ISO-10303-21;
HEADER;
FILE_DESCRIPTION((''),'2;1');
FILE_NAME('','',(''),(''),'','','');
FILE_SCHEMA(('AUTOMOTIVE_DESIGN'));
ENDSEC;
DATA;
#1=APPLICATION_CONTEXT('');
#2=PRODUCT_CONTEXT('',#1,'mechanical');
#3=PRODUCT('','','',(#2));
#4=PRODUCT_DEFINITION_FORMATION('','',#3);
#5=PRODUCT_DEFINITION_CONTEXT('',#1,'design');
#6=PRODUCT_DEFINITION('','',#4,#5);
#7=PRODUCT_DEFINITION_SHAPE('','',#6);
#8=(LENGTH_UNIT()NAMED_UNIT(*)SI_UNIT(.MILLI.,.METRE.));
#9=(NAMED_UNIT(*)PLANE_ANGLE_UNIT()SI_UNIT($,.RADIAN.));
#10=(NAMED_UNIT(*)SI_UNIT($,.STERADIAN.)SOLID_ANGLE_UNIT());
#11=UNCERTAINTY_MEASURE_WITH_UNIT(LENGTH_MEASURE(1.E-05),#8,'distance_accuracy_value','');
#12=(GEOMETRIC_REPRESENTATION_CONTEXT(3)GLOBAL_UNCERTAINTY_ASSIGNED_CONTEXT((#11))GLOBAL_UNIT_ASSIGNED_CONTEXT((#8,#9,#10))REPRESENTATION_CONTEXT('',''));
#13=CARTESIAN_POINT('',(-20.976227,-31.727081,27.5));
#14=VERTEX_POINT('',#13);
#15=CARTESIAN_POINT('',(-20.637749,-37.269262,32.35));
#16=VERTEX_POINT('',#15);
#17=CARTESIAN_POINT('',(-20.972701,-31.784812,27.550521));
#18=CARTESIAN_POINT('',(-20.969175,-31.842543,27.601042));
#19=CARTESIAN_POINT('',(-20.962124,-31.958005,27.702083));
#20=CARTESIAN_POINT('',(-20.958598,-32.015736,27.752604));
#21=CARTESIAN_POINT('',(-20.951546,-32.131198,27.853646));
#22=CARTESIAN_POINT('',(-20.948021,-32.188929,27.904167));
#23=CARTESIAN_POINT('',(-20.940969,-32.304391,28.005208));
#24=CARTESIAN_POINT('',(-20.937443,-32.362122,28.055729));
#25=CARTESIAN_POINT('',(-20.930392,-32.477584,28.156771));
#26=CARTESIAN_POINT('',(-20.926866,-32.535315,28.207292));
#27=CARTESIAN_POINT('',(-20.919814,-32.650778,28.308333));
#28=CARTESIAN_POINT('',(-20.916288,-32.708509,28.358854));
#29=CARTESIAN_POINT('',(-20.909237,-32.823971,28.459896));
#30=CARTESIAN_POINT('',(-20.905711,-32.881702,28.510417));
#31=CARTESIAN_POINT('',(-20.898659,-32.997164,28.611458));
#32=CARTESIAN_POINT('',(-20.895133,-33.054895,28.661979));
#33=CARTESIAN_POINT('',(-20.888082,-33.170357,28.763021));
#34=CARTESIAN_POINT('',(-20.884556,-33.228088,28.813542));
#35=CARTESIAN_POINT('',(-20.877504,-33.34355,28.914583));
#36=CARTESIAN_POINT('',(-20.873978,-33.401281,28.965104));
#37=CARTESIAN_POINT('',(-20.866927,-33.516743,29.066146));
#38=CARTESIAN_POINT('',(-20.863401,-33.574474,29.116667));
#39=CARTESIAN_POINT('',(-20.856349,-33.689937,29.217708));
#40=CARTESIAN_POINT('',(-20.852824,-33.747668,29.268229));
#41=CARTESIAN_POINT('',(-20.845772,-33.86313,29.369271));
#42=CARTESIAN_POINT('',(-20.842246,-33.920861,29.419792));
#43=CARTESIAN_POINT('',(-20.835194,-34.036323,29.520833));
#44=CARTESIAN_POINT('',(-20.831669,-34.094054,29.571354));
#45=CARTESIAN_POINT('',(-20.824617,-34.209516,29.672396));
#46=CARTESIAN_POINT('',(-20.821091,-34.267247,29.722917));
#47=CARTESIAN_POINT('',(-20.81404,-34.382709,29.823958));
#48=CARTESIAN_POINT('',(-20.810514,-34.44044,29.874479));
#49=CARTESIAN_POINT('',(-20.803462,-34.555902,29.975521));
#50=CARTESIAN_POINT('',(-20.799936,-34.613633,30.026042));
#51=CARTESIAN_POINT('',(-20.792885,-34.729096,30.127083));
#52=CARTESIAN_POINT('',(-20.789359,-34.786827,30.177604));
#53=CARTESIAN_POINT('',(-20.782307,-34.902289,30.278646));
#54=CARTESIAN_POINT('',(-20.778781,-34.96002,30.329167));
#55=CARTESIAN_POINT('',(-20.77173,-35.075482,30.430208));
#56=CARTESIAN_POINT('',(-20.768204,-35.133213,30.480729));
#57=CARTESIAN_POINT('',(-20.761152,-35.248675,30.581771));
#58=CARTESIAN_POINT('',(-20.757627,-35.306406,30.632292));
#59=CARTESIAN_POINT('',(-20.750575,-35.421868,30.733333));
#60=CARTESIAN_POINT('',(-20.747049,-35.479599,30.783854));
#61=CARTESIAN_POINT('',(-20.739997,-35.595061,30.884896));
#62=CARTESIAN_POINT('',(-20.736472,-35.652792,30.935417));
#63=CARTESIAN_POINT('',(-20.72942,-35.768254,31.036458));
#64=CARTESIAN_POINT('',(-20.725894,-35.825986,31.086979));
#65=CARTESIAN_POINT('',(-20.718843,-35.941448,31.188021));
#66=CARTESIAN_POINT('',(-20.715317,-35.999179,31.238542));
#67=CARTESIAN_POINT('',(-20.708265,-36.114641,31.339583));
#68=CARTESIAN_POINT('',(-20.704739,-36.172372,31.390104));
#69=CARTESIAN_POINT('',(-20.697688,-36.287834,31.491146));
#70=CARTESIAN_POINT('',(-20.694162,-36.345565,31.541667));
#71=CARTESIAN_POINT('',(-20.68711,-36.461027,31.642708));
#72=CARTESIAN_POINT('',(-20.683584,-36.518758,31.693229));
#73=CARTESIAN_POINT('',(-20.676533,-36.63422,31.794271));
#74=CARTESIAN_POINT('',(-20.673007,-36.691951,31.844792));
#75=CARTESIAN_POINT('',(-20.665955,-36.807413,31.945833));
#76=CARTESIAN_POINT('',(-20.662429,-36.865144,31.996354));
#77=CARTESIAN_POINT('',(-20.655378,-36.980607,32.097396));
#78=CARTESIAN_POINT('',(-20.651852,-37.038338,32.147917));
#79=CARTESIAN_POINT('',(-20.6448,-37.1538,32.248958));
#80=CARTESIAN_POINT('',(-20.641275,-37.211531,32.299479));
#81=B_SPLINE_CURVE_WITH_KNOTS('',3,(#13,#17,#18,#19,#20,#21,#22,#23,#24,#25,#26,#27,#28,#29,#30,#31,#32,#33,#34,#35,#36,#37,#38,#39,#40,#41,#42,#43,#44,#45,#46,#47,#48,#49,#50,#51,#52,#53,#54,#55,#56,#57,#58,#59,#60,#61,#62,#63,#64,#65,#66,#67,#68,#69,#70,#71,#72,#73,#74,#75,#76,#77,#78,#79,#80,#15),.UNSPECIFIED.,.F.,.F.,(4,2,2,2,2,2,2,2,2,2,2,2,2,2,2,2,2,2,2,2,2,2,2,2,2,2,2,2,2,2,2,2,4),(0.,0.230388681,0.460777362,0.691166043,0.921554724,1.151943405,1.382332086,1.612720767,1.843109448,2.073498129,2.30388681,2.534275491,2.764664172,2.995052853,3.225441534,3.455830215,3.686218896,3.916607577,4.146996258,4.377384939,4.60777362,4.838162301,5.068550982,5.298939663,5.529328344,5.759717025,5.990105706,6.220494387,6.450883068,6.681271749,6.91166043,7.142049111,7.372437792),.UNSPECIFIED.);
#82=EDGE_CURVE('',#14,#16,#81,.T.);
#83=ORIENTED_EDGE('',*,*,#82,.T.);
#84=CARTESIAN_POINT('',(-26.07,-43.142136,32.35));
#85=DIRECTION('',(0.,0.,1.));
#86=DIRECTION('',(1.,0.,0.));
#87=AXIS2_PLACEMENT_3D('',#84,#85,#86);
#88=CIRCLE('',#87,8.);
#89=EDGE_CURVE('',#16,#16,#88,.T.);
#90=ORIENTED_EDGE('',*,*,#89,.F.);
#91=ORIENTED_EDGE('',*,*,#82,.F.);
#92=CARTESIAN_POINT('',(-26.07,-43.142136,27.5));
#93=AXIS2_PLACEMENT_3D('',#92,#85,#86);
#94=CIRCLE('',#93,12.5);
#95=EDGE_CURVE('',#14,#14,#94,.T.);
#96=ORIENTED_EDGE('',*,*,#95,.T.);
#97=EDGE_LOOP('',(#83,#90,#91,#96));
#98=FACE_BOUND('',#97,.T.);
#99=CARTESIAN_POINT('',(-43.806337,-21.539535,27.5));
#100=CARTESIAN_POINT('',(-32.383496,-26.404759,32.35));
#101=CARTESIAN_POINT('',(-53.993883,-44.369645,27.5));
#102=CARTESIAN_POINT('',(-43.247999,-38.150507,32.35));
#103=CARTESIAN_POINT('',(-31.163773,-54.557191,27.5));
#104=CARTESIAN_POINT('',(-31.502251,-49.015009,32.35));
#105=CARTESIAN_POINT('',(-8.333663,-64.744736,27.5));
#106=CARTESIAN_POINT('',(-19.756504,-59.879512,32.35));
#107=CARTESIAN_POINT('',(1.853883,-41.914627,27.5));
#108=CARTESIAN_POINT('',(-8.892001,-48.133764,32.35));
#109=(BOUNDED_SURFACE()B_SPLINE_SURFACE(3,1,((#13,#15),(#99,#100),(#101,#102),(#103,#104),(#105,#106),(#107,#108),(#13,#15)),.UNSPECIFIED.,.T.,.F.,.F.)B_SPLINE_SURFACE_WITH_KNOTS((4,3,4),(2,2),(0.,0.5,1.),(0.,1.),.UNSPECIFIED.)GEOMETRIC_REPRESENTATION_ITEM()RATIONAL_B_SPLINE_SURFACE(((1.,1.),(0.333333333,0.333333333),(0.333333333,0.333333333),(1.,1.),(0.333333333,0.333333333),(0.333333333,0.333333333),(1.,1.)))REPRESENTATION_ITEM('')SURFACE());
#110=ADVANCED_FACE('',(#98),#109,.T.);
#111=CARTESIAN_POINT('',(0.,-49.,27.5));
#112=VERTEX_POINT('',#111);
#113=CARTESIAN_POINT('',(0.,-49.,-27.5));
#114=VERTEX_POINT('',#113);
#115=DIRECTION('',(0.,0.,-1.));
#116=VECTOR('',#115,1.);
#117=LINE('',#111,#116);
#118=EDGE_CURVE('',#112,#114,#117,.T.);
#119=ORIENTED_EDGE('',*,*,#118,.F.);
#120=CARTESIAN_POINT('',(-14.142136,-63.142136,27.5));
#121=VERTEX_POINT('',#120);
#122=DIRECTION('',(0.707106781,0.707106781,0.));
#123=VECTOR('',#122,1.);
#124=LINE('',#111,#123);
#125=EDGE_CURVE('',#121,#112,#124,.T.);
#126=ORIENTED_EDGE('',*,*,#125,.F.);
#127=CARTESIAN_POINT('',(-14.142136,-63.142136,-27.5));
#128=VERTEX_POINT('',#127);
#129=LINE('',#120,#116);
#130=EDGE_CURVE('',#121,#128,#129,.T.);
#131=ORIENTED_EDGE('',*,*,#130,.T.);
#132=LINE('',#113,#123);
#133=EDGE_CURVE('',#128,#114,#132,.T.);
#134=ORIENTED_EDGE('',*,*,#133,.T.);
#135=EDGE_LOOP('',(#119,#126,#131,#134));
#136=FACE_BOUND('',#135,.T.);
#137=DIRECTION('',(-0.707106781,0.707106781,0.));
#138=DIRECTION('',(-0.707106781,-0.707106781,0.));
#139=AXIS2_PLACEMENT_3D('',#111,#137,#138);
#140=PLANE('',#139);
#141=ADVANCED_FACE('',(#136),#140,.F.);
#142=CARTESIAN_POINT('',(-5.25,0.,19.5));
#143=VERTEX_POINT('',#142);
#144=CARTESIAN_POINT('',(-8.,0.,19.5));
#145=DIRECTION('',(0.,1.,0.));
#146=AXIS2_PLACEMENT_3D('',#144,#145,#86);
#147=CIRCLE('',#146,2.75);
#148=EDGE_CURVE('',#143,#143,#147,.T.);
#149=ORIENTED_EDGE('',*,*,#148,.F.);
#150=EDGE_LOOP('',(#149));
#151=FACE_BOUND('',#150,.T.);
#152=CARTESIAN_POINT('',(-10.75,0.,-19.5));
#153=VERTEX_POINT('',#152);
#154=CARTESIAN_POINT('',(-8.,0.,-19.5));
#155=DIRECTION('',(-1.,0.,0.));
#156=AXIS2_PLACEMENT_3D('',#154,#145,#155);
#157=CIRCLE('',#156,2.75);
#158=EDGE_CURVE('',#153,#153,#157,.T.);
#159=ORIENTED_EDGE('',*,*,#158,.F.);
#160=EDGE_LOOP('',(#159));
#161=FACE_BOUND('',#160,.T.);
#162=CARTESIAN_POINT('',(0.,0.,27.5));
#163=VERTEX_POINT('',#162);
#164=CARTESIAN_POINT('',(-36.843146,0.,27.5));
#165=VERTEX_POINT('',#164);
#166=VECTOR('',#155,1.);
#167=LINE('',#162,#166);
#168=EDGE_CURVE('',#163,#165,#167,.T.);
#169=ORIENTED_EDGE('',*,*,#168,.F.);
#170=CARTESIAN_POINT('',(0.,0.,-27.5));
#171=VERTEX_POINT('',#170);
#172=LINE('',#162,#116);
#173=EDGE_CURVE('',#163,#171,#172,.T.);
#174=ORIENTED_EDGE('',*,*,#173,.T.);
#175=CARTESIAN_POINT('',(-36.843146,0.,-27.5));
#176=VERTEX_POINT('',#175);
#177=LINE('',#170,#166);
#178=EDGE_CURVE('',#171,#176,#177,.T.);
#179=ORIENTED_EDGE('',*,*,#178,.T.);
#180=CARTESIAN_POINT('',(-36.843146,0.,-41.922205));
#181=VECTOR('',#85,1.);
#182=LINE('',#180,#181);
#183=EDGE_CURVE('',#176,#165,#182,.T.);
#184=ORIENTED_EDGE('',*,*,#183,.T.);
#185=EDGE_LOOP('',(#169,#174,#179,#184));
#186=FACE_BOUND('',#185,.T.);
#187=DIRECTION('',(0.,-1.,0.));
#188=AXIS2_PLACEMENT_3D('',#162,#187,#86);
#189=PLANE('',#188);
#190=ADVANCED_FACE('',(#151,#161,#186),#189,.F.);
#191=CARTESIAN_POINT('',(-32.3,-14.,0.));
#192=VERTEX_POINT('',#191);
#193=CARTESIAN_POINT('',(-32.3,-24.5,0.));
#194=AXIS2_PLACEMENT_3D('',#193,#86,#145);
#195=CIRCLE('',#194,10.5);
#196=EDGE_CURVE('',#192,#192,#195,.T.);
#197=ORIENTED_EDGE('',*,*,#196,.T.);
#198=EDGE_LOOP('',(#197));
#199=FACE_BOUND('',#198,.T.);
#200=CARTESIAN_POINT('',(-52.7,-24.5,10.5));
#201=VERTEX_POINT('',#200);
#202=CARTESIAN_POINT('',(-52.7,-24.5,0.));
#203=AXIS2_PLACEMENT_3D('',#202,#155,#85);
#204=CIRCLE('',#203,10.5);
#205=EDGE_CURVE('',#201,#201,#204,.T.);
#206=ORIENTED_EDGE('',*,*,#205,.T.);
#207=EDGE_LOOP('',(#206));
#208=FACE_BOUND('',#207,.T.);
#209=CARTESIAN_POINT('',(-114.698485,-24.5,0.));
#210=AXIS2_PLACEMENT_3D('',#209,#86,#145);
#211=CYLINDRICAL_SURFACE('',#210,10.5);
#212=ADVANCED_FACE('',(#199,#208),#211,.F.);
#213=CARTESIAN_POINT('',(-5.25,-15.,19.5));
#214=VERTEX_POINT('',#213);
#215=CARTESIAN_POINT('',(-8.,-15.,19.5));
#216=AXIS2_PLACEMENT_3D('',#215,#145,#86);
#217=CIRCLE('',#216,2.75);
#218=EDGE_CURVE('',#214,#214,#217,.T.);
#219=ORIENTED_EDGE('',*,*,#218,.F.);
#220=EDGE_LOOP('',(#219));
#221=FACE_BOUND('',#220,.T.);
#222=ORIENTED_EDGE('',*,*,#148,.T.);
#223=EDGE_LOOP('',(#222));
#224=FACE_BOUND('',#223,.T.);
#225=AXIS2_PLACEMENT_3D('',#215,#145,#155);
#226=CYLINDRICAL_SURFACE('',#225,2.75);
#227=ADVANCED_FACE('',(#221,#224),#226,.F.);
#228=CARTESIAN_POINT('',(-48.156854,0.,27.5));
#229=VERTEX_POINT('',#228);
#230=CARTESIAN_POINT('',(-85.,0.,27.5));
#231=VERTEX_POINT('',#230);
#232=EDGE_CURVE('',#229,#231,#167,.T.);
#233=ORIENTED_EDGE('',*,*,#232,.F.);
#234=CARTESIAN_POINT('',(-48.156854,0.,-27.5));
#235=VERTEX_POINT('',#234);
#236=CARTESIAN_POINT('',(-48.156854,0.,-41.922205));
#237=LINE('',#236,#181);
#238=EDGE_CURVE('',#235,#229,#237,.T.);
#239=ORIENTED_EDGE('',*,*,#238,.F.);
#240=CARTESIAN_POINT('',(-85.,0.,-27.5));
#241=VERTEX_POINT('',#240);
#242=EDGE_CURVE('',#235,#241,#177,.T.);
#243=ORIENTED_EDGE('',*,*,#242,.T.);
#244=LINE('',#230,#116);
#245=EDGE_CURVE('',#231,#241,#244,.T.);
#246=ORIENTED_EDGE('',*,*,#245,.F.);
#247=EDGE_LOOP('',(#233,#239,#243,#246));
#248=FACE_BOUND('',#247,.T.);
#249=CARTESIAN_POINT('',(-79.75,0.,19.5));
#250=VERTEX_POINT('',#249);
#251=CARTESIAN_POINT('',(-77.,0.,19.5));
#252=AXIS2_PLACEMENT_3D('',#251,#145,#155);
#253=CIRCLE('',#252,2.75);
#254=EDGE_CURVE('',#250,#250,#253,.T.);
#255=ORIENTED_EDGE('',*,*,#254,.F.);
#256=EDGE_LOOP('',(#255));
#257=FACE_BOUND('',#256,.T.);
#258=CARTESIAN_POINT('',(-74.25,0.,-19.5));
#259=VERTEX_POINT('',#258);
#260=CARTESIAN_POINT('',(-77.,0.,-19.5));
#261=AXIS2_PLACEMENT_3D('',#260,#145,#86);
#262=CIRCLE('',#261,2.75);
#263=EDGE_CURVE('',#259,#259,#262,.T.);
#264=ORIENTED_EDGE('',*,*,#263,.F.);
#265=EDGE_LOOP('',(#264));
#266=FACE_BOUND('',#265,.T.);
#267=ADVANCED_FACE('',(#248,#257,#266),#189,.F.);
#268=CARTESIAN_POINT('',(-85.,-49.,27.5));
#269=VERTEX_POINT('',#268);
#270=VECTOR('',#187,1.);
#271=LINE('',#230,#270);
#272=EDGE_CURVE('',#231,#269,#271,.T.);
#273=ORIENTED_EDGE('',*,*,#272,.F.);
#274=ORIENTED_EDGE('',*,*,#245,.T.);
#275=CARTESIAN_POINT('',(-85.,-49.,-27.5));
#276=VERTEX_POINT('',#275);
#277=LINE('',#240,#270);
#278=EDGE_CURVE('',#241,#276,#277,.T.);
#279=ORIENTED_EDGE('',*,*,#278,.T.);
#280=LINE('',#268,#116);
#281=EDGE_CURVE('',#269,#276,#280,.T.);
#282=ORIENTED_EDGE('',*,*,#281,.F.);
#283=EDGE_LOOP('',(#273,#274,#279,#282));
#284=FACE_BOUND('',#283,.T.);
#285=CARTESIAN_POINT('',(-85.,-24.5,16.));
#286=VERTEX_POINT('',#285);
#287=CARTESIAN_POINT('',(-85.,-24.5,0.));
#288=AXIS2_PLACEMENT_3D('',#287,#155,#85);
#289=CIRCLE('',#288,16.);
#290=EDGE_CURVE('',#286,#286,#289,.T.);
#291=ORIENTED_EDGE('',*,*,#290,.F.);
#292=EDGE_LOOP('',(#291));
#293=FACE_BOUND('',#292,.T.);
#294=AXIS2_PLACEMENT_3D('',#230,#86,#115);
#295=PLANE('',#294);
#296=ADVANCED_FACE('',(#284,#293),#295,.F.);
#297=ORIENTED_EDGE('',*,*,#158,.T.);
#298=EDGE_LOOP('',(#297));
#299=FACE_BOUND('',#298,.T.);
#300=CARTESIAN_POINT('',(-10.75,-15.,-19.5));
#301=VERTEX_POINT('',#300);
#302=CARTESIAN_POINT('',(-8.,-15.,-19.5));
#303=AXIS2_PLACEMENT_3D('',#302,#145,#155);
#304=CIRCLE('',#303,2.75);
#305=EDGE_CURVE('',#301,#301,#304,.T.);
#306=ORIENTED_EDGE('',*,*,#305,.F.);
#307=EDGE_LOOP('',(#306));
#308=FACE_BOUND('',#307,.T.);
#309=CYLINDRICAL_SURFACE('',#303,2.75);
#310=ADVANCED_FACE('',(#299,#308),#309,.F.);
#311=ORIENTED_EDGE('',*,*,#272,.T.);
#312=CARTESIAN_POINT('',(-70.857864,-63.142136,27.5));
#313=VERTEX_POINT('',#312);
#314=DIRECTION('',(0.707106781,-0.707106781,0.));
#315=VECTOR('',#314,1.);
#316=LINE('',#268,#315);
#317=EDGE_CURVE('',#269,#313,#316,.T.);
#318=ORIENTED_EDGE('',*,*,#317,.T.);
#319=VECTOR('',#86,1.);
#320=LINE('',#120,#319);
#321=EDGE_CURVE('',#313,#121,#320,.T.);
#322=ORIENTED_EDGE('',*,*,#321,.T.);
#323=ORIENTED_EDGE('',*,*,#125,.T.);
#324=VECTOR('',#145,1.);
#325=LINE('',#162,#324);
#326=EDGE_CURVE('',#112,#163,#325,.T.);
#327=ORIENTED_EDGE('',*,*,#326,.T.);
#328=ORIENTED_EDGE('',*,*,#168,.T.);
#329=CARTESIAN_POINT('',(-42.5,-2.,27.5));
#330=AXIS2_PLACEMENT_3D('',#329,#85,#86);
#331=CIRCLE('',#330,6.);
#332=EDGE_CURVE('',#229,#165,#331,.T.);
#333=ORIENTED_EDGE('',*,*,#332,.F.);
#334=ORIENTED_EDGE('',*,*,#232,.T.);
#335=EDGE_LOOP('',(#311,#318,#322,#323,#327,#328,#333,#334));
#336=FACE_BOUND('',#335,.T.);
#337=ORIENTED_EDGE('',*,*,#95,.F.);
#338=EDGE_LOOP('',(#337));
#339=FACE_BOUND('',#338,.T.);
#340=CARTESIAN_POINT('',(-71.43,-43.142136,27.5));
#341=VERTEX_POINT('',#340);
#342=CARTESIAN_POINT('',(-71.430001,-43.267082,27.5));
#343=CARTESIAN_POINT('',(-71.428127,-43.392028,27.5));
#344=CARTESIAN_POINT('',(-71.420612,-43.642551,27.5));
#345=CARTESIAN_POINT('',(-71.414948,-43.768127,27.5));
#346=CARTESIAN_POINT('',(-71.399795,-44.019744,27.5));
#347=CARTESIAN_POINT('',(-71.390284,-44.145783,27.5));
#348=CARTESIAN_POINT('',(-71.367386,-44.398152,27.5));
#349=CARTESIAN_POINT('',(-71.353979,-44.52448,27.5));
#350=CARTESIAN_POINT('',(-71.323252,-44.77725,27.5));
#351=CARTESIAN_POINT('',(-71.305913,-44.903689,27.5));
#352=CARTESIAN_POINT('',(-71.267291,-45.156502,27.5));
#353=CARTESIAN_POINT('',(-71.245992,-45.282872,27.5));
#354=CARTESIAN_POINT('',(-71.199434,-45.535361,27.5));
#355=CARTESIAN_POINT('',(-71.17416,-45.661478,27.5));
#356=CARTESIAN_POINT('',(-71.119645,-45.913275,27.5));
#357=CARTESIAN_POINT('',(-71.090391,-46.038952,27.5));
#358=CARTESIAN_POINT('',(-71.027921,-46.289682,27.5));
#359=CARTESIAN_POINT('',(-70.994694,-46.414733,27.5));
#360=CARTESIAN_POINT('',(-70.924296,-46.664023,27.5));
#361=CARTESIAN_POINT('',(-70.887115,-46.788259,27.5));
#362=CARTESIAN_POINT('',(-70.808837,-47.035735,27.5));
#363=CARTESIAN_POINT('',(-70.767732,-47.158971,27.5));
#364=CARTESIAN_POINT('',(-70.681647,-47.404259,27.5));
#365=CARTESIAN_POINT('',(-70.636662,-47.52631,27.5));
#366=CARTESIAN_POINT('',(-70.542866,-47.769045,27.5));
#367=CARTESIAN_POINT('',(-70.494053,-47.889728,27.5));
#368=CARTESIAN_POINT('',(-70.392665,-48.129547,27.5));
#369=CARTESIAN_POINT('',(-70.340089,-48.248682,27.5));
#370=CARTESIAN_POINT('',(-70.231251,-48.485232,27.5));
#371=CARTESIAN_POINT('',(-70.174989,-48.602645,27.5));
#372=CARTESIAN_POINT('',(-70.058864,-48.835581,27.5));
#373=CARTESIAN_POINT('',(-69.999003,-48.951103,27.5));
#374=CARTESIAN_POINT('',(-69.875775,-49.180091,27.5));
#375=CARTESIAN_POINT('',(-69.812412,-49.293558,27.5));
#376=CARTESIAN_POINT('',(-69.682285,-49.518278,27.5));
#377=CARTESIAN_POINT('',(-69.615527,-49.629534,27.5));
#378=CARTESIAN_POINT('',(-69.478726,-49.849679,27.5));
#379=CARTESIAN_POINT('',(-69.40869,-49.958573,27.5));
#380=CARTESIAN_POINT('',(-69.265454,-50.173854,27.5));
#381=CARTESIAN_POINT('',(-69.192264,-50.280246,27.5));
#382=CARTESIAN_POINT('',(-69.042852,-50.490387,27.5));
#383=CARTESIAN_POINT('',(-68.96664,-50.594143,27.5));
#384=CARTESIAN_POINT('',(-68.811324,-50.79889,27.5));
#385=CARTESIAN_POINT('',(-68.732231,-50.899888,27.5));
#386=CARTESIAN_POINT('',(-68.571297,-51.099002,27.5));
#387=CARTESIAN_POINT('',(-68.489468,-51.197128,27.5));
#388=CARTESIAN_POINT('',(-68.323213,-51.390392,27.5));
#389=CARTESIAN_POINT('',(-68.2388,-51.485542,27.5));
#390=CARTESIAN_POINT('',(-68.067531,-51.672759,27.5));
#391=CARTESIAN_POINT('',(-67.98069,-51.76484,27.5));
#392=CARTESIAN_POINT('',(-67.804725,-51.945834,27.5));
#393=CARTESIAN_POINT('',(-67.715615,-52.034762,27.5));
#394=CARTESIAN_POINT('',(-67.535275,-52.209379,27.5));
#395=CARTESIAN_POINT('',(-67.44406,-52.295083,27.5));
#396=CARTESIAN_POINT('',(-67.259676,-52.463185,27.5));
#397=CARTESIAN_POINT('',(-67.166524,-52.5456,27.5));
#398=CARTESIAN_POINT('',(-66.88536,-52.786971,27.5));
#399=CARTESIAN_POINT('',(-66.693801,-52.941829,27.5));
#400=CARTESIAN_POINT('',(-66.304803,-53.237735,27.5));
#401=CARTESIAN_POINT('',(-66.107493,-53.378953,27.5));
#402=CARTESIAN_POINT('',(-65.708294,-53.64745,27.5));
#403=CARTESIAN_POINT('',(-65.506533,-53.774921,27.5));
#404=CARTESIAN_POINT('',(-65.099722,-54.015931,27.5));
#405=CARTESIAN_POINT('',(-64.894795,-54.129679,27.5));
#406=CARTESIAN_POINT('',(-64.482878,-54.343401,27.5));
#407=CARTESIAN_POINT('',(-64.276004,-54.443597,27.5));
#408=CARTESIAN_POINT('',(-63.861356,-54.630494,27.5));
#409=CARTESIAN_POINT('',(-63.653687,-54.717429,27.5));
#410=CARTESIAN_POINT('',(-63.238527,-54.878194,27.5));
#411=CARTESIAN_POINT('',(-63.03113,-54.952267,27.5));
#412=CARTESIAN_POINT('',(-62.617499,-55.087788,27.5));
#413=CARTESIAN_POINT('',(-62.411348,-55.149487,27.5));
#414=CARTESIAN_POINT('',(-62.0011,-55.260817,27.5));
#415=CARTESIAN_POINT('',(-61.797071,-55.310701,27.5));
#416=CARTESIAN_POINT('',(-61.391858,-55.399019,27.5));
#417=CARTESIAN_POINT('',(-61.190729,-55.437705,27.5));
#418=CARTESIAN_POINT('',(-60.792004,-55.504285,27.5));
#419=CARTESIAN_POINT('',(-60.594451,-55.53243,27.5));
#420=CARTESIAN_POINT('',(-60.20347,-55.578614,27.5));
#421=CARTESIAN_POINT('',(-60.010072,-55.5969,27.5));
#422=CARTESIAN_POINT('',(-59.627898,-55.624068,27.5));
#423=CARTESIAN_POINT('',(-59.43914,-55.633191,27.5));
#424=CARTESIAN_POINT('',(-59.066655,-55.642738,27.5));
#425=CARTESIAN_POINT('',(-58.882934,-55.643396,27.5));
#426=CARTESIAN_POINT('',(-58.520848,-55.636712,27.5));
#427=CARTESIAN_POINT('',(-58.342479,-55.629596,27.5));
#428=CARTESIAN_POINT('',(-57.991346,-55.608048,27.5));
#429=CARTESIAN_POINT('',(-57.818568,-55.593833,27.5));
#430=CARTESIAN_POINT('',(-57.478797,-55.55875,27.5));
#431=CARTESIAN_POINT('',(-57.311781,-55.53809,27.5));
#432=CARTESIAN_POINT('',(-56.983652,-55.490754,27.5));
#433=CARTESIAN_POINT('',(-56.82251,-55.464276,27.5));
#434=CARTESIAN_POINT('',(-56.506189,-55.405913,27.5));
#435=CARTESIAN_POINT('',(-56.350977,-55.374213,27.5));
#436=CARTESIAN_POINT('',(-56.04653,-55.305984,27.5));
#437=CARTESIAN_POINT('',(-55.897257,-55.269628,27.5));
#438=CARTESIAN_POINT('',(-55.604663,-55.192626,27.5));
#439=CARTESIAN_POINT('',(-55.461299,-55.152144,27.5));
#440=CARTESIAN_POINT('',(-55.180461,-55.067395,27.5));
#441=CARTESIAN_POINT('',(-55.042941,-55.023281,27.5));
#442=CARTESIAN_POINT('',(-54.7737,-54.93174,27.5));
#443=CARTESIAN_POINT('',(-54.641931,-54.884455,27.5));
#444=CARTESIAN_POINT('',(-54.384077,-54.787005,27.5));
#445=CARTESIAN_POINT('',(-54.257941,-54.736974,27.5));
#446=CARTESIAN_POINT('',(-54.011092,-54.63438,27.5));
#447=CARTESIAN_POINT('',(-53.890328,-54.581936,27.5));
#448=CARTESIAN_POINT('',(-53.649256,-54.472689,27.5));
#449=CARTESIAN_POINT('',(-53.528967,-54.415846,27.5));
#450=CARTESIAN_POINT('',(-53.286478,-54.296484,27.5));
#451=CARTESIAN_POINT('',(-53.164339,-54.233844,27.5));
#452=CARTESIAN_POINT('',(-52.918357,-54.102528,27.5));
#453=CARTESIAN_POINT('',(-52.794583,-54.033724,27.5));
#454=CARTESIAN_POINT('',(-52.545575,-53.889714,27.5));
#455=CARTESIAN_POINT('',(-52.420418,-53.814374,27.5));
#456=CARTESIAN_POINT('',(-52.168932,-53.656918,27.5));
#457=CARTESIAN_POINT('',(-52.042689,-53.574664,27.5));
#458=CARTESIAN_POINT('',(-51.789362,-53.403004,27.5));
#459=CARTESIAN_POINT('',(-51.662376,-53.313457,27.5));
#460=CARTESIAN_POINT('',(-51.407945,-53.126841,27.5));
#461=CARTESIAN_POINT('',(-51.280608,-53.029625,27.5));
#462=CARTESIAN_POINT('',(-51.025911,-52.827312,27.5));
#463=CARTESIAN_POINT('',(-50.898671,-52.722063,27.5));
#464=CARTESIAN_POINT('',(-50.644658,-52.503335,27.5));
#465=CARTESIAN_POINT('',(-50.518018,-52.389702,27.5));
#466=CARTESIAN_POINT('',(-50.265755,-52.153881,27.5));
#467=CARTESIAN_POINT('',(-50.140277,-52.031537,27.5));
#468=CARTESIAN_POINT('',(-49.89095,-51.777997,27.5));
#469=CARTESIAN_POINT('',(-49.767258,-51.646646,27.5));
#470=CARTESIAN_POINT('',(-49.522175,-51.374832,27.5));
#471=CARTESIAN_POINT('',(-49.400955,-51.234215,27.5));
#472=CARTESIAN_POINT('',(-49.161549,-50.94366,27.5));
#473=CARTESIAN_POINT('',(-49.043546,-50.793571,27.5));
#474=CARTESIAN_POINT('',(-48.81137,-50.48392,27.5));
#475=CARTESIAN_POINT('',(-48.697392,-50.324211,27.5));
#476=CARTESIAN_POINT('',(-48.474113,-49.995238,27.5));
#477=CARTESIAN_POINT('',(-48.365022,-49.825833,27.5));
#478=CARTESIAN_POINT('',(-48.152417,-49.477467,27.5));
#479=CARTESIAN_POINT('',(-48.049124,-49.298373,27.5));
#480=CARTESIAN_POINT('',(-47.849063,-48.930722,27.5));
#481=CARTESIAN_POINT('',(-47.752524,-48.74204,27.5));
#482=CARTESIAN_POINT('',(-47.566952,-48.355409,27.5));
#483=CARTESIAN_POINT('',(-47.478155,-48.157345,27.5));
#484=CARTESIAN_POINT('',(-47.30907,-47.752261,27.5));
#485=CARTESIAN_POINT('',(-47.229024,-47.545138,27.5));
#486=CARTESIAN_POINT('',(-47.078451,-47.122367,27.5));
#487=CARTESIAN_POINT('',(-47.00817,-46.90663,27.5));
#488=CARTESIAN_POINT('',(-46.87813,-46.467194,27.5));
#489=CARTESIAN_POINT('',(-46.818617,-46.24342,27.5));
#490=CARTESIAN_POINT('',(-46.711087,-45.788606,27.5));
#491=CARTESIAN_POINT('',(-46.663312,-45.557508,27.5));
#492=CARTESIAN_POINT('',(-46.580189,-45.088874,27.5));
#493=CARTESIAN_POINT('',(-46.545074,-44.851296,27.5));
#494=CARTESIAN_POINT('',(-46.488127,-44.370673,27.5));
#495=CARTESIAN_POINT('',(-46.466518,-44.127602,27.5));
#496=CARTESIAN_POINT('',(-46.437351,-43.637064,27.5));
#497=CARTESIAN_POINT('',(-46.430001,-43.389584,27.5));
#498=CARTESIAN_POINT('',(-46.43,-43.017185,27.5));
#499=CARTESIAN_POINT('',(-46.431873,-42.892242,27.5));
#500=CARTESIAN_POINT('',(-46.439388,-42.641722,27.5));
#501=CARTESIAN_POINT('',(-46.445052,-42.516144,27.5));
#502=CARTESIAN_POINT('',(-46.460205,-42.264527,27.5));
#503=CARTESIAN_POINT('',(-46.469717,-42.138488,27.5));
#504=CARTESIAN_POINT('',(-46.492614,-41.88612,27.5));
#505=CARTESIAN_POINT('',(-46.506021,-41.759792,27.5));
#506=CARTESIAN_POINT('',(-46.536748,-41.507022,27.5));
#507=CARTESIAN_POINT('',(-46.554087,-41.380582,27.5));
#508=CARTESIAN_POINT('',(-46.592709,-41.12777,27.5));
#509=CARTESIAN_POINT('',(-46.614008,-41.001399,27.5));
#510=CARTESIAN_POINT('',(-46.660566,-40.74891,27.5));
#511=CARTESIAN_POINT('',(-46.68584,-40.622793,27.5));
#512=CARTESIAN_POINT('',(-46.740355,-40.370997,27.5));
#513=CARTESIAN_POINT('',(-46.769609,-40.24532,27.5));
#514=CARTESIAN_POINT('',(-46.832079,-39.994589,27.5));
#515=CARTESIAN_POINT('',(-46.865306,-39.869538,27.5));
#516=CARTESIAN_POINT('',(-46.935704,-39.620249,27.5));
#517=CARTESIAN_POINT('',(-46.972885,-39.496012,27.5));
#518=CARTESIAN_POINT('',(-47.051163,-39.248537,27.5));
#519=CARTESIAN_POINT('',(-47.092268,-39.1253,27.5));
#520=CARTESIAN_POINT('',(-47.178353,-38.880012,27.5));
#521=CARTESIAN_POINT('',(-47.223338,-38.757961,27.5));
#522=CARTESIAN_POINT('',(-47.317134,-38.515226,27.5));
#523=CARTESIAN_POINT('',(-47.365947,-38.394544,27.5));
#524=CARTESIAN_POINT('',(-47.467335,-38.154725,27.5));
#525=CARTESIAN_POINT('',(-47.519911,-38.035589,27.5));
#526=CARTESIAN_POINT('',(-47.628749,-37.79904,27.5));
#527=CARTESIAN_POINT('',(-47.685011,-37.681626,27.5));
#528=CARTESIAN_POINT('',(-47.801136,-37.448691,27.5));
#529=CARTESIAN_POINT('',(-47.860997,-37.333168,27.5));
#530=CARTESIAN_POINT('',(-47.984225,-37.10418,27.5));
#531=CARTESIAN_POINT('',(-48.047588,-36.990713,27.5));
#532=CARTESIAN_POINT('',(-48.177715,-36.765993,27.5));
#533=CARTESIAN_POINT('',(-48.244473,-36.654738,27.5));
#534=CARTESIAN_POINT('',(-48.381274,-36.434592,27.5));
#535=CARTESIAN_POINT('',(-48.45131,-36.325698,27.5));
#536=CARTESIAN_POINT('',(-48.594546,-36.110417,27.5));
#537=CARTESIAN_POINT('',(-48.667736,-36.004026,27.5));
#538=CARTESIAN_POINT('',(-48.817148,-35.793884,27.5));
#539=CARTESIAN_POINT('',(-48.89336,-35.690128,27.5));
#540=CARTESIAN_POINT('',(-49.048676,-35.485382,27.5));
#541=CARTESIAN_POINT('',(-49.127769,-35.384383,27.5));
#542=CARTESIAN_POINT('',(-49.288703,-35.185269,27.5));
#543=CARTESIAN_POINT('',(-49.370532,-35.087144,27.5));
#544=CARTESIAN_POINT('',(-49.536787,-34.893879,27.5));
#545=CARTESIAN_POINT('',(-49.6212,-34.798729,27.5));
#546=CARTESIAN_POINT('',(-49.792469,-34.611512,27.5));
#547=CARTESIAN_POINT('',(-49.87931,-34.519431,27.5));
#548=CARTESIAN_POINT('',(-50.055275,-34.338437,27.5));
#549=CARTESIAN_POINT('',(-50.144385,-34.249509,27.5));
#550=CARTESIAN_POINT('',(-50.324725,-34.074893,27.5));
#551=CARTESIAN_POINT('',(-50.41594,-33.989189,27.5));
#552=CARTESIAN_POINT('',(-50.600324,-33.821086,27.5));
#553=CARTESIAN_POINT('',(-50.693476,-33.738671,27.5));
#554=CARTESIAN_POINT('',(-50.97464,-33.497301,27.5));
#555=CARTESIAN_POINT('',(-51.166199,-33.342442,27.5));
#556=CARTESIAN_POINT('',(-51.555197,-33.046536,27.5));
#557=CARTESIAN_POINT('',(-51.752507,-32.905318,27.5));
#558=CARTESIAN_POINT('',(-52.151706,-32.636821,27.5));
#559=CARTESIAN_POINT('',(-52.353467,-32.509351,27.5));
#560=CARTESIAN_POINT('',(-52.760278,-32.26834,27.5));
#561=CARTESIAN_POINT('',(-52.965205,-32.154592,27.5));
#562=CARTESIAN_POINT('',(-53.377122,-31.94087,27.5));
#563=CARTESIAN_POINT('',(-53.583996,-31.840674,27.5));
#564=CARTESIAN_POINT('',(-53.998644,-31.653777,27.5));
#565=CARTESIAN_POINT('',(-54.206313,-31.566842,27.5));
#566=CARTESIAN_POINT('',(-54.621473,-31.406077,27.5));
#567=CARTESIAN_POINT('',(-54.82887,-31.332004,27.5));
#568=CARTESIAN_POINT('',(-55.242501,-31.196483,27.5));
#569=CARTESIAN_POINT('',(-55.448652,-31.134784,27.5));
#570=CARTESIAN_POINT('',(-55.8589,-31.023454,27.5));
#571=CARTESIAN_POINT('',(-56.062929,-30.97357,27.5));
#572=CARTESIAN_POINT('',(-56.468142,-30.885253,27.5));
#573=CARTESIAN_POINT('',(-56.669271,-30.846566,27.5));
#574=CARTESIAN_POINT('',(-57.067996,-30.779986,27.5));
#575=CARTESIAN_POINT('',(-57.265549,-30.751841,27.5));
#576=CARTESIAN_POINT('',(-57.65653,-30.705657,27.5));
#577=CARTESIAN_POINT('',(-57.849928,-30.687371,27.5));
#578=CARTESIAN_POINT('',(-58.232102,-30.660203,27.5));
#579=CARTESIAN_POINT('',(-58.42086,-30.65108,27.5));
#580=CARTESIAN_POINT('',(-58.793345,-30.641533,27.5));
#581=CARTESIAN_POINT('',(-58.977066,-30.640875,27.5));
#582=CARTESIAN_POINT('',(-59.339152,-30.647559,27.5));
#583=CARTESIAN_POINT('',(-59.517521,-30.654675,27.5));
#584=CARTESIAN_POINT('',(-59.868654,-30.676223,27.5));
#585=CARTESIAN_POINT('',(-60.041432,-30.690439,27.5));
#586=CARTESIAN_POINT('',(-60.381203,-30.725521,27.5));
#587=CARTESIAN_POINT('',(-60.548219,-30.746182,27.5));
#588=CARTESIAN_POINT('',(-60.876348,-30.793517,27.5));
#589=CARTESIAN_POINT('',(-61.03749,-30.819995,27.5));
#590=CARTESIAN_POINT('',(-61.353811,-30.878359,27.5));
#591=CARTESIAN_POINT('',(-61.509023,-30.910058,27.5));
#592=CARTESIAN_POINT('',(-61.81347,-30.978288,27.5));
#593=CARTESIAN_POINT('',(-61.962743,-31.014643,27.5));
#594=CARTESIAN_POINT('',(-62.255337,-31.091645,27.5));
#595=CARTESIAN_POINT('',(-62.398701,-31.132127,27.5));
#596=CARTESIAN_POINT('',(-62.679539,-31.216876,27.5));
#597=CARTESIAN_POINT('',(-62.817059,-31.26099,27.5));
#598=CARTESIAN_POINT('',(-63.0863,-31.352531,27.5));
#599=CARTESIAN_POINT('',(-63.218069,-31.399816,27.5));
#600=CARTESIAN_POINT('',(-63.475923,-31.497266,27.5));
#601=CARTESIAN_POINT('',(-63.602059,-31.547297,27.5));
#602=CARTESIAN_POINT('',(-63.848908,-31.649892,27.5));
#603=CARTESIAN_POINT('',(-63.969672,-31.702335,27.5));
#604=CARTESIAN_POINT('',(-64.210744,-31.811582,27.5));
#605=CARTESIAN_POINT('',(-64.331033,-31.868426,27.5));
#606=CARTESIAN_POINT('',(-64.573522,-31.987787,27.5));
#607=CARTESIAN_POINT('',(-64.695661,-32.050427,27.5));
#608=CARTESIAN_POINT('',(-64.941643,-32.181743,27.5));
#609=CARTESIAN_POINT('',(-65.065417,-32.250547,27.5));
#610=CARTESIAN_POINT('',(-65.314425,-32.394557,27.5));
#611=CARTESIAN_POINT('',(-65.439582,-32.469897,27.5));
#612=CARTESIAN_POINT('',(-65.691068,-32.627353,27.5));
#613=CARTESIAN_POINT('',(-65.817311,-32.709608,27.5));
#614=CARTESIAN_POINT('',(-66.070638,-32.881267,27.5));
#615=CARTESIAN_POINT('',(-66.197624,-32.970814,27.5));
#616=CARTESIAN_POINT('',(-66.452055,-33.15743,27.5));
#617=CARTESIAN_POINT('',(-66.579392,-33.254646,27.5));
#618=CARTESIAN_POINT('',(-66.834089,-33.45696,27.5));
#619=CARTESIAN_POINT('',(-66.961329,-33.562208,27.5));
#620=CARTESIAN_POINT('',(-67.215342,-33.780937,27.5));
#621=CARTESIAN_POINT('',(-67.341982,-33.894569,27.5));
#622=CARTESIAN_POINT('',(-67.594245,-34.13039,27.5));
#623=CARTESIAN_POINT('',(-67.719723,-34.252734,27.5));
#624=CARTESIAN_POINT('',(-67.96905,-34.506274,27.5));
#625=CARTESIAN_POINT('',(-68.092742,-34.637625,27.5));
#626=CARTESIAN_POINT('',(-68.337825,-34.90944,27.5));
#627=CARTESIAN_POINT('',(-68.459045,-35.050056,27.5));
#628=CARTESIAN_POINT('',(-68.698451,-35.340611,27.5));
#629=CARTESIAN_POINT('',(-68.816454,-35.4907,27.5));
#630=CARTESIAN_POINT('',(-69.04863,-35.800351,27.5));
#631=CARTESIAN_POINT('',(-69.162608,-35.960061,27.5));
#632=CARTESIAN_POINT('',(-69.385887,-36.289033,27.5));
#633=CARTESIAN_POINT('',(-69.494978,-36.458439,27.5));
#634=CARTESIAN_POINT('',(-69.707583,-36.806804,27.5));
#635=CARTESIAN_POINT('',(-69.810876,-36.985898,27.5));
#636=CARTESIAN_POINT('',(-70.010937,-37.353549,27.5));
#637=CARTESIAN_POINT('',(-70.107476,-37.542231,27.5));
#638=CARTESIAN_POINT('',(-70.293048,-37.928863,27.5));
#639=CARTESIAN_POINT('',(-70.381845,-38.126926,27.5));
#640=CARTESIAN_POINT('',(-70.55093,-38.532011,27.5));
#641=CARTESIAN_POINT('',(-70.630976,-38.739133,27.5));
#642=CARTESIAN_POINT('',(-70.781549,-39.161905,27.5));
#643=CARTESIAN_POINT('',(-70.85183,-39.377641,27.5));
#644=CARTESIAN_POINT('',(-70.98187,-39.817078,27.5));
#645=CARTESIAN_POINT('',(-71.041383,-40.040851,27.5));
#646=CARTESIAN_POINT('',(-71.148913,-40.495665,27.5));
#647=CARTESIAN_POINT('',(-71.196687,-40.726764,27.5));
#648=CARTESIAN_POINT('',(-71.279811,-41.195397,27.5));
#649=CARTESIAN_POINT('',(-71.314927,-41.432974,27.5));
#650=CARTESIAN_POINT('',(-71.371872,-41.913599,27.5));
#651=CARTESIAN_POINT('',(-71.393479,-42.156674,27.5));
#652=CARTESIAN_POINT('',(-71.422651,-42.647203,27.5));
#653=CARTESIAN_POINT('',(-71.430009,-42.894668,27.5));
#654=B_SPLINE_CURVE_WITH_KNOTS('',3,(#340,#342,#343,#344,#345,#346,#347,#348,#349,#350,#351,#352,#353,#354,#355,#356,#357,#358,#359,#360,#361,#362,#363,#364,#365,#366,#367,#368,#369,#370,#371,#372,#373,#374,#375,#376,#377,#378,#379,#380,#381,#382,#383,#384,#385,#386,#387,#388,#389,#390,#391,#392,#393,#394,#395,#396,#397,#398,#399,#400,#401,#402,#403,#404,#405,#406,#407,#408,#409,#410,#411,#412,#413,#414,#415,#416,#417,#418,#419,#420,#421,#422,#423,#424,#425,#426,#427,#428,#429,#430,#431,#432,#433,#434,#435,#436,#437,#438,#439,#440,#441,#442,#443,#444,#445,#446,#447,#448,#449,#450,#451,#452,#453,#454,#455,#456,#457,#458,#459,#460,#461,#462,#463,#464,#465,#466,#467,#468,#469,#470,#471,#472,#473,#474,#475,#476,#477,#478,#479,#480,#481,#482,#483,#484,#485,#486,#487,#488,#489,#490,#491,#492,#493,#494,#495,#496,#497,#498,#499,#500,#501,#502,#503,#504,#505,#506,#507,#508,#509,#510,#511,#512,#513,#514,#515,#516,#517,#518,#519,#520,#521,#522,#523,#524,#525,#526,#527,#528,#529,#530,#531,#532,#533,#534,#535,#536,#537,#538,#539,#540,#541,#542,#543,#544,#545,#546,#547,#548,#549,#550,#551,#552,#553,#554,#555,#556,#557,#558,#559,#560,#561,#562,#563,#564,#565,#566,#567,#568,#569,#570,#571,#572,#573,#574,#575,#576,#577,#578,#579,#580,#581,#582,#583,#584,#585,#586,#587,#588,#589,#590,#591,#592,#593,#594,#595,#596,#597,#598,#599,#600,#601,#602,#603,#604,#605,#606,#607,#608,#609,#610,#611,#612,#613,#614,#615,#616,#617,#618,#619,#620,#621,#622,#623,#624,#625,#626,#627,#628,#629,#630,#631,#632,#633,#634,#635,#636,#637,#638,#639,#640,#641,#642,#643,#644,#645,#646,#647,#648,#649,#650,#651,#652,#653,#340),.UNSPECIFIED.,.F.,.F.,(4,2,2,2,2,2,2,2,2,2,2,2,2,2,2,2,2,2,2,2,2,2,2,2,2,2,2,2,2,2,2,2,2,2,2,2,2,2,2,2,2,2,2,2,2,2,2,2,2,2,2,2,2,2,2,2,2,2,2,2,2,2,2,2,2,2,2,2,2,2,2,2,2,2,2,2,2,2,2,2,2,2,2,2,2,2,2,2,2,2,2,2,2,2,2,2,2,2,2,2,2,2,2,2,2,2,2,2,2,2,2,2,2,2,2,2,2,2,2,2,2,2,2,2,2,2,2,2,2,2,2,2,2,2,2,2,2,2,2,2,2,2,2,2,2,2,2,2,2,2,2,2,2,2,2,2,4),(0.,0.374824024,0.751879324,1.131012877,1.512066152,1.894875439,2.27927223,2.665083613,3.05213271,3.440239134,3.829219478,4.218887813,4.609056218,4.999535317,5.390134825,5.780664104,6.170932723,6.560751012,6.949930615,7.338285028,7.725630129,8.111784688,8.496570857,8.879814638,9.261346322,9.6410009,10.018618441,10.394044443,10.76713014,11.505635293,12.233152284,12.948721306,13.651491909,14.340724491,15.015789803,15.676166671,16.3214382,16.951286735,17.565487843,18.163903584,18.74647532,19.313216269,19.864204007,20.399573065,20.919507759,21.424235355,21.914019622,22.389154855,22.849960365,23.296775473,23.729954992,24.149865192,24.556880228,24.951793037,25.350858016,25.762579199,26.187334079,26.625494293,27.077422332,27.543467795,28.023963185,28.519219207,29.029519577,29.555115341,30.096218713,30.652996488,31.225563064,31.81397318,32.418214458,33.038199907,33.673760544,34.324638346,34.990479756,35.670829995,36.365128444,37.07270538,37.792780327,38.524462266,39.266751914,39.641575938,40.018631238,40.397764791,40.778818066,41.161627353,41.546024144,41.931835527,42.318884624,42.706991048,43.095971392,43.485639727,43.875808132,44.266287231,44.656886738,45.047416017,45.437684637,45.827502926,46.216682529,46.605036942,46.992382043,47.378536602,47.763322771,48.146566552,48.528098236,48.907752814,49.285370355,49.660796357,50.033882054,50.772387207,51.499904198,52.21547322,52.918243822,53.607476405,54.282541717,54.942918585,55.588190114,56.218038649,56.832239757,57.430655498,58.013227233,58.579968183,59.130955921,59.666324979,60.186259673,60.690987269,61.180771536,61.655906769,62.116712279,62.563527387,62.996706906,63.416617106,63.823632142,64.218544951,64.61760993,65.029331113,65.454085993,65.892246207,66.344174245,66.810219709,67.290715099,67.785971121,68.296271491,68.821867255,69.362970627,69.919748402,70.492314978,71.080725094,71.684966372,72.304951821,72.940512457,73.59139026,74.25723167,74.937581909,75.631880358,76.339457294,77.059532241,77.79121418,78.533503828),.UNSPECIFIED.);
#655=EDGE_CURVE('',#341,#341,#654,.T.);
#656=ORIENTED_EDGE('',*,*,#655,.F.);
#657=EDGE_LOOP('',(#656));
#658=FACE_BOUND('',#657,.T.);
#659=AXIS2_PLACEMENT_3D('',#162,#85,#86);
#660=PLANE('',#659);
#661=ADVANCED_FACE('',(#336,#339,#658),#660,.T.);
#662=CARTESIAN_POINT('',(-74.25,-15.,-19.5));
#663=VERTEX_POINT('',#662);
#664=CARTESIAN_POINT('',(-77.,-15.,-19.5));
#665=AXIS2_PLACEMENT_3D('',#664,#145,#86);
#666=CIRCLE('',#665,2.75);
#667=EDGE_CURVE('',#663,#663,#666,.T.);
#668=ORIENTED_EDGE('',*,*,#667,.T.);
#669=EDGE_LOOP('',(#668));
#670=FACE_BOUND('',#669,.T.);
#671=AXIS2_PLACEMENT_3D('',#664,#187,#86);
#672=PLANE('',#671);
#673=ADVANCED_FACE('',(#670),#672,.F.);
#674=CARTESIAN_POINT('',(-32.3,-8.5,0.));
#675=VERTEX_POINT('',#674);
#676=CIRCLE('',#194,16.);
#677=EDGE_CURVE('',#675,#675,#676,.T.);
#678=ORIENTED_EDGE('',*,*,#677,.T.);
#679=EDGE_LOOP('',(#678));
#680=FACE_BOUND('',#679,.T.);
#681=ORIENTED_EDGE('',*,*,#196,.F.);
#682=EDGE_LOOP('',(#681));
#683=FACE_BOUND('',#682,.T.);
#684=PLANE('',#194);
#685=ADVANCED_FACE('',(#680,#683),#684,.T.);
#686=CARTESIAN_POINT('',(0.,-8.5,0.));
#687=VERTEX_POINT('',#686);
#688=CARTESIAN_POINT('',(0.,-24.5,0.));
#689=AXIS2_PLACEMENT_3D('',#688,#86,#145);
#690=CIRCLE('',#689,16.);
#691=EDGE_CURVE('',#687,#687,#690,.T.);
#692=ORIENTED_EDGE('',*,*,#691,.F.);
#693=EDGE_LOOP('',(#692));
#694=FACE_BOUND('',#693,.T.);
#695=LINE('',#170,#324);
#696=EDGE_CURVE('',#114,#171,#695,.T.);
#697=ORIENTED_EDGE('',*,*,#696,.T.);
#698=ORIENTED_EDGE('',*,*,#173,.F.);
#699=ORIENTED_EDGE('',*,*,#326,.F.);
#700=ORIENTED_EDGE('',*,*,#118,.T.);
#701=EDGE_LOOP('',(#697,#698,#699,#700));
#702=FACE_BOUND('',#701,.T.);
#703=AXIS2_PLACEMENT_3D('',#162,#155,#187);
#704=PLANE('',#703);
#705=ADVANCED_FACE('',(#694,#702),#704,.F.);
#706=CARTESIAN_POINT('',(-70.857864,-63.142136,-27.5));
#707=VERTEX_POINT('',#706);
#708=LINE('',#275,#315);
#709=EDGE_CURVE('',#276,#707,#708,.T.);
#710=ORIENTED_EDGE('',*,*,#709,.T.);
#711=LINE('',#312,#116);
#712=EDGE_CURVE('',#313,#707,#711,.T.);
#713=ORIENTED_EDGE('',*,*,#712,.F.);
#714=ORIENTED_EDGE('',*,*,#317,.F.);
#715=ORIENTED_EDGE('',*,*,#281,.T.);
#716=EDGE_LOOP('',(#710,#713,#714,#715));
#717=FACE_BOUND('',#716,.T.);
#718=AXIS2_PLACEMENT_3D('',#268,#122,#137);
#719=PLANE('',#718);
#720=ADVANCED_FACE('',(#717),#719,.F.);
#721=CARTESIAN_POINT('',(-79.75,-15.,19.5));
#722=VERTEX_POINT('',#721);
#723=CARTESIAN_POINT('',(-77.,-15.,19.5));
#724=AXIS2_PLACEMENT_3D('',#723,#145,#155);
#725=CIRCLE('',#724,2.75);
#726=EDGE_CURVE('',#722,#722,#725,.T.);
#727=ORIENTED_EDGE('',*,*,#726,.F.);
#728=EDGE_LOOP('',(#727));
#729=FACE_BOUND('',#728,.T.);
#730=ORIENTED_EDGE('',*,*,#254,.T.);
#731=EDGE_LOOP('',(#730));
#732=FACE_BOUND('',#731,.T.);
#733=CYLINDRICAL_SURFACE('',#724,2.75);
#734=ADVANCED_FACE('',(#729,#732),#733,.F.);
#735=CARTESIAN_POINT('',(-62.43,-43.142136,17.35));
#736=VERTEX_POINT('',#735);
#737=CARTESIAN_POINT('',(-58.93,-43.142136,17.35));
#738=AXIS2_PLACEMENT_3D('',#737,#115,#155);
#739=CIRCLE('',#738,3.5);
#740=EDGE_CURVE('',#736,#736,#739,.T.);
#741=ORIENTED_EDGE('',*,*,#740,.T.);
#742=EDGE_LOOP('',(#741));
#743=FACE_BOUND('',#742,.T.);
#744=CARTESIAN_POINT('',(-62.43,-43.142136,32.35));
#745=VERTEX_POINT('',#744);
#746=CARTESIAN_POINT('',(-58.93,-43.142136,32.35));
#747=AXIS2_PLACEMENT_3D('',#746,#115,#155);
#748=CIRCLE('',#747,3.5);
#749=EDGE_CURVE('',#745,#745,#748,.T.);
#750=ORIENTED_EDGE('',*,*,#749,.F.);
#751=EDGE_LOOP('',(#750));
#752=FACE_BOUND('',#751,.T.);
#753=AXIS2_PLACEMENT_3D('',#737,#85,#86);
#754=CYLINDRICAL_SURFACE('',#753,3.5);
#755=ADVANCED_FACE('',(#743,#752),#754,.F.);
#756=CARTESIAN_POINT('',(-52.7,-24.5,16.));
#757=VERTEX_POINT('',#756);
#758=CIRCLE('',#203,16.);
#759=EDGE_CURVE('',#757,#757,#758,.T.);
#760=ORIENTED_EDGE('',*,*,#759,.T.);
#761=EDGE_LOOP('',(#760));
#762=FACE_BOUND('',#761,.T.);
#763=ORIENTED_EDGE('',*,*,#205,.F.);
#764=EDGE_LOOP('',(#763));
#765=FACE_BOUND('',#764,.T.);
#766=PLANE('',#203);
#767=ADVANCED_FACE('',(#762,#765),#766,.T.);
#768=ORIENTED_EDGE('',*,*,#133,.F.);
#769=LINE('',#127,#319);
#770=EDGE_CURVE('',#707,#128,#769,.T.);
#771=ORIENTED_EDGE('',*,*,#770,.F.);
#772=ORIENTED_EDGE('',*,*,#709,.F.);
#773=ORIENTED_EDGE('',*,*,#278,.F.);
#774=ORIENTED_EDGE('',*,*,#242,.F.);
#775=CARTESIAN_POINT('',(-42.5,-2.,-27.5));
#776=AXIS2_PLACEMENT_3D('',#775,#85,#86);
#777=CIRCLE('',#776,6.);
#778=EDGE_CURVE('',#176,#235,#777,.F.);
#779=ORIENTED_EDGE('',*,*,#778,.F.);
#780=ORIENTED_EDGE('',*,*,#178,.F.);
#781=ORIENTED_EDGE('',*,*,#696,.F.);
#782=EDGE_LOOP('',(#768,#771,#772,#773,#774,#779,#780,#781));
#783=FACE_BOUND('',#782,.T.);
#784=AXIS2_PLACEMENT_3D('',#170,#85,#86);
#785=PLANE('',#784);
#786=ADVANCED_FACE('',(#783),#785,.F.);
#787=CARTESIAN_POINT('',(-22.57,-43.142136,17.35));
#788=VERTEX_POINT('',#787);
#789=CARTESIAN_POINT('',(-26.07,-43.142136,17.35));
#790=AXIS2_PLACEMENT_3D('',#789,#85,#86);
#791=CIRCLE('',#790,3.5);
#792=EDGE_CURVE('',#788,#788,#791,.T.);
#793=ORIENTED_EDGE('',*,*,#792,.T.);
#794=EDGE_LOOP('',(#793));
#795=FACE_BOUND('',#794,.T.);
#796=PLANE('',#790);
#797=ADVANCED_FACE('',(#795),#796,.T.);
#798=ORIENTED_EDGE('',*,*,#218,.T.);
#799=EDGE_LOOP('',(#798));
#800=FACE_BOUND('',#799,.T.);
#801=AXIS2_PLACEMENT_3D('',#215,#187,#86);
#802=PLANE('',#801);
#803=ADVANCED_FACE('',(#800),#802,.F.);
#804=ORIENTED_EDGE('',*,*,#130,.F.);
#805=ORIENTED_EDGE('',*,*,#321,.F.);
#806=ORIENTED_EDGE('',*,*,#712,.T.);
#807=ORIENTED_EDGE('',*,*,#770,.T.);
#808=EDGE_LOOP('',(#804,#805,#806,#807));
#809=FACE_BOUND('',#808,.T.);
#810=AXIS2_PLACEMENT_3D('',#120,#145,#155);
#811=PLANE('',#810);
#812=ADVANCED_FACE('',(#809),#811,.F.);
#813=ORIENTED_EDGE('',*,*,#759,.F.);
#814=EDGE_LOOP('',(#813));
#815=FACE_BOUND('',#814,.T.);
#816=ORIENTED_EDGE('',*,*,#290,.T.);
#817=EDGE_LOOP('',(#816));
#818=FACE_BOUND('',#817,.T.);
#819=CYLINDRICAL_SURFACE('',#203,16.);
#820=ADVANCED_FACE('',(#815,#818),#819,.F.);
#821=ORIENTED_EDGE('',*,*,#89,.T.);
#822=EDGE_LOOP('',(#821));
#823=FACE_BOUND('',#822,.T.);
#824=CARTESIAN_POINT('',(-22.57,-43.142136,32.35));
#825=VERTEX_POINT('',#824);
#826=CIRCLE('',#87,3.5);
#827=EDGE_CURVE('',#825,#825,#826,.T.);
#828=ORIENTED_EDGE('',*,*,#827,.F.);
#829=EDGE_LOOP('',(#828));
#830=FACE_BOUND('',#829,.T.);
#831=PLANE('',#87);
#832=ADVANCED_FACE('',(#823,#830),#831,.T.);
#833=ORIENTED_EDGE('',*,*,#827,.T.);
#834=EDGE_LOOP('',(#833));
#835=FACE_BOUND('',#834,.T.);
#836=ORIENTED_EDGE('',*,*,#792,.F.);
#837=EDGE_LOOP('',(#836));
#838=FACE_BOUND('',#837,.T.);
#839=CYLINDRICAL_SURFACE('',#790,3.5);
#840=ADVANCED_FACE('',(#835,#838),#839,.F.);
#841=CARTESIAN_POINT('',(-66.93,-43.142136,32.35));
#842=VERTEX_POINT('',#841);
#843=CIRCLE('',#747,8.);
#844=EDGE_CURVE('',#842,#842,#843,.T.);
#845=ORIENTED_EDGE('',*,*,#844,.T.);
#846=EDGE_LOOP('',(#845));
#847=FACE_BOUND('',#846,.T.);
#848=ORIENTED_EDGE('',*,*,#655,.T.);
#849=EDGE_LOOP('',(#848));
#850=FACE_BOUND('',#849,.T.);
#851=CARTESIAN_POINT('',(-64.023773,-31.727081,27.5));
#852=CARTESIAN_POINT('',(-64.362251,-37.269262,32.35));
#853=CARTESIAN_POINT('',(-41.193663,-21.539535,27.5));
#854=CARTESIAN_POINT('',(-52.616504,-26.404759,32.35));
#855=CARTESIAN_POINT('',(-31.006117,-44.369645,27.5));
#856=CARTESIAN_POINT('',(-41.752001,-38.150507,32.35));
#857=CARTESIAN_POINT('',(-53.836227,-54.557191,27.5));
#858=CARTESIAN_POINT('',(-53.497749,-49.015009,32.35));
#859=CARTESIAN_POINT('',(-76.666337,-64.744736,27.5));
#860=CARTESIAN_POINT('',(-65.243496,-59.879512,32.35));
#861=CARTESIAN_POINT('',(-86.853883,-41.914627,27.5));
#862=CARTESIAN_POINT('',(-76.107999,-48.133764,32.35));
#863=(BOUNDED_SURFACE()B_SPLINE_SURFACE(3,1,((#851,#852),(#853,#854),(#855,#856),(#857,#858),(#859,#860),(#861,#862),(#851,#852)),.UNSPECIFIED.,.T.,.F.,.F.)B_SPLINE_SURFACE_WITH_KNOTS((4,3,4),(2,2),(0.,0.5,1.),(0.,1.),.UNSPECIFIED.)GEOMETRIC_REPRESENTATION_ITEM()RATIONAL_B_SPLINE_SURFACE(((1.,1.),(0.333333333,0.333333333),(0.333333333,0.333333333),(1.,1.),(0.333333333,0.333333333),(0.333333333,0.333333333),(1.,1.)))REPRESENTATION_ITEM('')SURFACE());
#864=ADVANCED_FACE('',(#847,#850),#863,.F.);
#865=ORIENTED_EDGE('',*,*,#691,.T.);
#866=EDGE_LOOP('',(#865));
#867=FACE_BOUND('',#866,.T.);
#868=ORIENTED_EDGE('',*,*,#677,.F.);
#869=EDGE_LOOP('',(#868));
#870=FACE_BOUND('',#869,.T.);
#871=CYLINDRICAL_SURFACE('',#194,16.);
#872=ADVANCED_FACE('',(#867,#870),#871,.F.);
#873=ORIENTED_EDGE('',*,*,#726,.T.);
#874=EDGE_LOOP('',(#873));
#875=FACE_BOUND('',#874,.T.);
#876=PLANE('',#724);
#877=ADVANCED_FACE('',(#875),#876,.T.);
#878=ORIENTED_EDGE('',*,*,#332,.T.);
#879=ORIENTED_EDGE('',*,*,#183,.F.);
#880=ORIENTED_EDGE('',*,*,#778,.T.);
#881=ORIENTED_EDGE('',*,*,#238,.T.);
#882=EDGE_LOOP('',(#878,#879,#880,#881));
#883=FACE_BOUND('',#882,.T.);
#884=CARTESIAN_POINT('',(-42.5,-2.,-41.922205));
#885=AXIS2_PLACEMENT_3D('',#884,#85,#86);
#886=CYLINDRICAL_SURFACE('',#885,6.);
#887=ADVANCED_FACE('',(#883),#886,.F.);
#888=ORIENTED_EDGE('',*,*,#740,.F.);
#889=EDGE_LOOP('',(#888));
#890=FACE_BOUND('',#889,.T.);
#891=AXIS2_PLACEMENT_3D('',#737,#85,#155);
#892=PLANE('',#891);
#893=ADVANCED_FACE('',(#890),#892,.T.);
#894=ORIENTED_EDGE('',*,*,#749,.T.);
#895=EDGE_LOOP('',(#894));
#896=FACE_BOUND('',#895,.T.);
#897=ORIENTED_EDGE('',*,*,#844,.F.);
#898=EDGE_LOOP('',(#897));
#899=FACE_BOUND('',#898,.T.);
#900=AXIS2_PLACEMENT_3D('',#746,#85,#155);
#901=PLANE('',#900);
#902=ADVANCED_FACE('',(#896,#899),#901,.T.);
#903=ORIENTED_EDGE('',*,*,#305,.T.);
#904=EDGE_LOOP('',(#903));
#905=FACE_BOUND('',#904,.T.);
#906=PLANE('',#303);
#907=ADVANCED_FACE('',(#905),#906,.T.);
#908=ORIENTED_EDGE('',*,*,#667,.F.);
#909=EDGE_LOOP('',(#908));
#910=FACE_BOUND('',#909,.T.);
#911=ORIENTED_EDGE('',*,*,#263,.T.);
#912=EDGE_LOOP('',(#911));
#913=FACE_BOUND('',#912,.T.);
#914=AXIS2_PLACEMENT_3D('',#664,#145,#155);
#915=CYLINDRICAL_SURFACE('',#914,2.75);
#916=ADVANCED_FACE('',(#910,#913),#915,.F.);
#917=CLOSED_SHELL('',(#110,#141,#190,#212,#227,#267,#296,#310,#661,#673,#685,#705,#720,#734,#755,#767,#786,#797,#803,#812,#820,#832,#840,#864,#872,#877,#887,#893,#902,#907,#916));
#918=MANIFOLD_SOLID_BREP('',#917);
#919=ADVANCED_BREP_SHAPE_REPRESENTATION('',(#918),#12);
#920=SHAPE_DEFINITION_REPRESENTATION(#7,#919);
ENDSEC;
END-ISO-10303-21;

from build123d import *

# Parameters (mm, degrees)
BOSS_EXTRUDE1_DEPTH = 27.5
CUT_EXTRUDE1_DEPTH  = 55
SKETCH3_R           = 10.5
CUT_EXTRUDE2_DEPTH  = 85
SKETCH4_R           = 16
SKETCH4_R_2         = 10.5
CUT_EXTRUDE3_DEPTH  = 32.3
CUT_EXTRUDE4_START  = -32.3
SKETCH5_R           = 16
SKETCH5_R_2         = 10.5
CUT_EXTRUDE4_DEPTH  = 32.3
SKETCH6_R           = 2.75
CUT_EXTRUDE5_DEPTH  = 15
SKETCH9_R           = 3.5
CUT_EXTRUDE6_DEPTH  = 15


with BuildPart() as part:
    # Sketch1 → Boss-Extrude1 (new, symmetric)
    with BuildSketch(Plane.XY):
        Polygon((0, 0), (0, -49), (-14.142135624, -63.142135624), (-70.857864376, -63.142135624), (-85, -49), (-85, 0), align=None)
    extrude(amount=BOSS_EXTRUDE1_DEPTH, both=True)

    # Sketch2 → Cut-Extrude1 (cut)
    with BuildSketch(Plane.XY.offset(27.5)):
        with BuildLine():
            Line((-36.843145751, 0), (-48.156854249, 0))
            ThreePointArc((-48.156854249, 0), (-42.5, -8), (-36.843145751, 0))
        make_face()
    extrude(amount=-CUT_EXTRUDE1_DEPTH, mode=Mode.SUBTRACT)

    # Sketch3 → Cut-Extrude2 (cut)
    with BuildSketch(Plane(origin=(0, 0, 0), x_dir=(0, 0, -1), z_dir=(1, 0, 0))):
        with Locations(Location((0, -24.5, 0), (0, 0, 90))):
            Circle(SKETCH3_R)
    extrude(amount=-CUT_EXTRUDE2_DEPTH, mode=Mode.SUBTRACT)

    # Sketch4 → Cut-Extrude3 (cut)
    with BuildSketch(Plane(origin=(0, 0, 0), x_dir=(0, 0, -1), z_dir=(1, 0, 0))):
        with Locations(Location((0, -24.5, 0), (0, 0, 90))):
            Circle(SKETCH4_R)
        with Locations(Location((0, -24.5, 0), (0, 0, 90))):
            Circle(SKETCH4_R_2, mode=Mode.SUBTRACT)
    extrude(amount=-CUT_EXTRUDE3_DEPTH, mode=Mode.SUBTRACT)

    # Sketch5 → Cut-Extrude4 (cut)
    with BuildSketch(Plane.ZY.offset(85).offset(CUT_EXTRUDE4_START)):
        with Locations(Location((0, -24.5, 0), (0, 0, 90))):
            Circle(SKETCH5_R)
        with Locations(Location((0, -24.5, 0), (0, 0, 90))):
            Circle(SKETCH5_R_2, mode=Mode.SUBTRACT)
    extrude(amount=CUT_EXTRUDE4_DEPTH, mode=Mode.SUBTRACT)

    # Sketch6 → Cut-Extrude5 (cut)
    with BuildSketch(Plane(origin=(0, 0, 0), x_dir=(1, 0, 0), z_dir=(0, 1, 0))):
        with Locations(Location((-8, 19.5, 0), (0, 0, 180))):
            Circle(SKETCH6_R)
        with Locations((-8, -19.5)):
            Circle(SKETCH6_R)
        with Locations(Location((-77, -19.5, 0), (0, 0, 180))):
            Circle(SKETCH6_R)
        with Locations((-77, 19.5)):
            Circle(SKETCH6_R)
    extrude(amount=-CUT_EXTRUDE5_DEPTH, mode=Mode.SUBTRACT)

    # Loft1: read off the stored shape, not the designer's step
    # Loft1: loft between two sections, ruled curve by curve
    loft1_from = [
        Edge.make_bspline([(-20.976227121, -31.727080746, 27.5), (-43.806336876, -21.539534988, 27.5), (-53.993882634, -44.369644744, 27.5), (-31.163772879, -54.557190501, 27.5), (-8.333663124, -64.744736259, 27.5), (1.853882634, -41.914626504, 27.5), (-20.976227121, -31.727080746, 27.5)], [0, 0, 0, 0, 0.5, 0.5, 0.5, 1, 1, 1, 1], 3, [1, 0.333333333, 0.333333333, 1, 0.333333333, 0.333333333, 1]),
    ]
    loft1_to = [
        Edge.make_bspline([(-20.63774875, -37.26926185, 32.35), (-32.383496297, -26.40475935, 32.35), (-43.247998797, -38.150506897, 32.35), (-31.50225125, -49.015009397, 32.35), (-19.756503703, -59.879511897, 32.35), (-8.892001203, -48.13376435, 32.35), (-20.63774875, -37.26926185, 32.35)], [0, 0, 0, 0, 0.5, 0.5, 0.5, 1, 1, 1, 1], 3, [1, 0.333333333, 0.333333333, 1, 0.333333333, 0.333333333, 1]),
    ]
    loft1 = Solid(Shell([*[Face.make_surface_from_curves(loft1_from[k], loft1_to[k]) for k in range(1)], Face(Wire(loft1_from)), Face(Wire(loft1_to))]))
    add(loft1)

    # Sketch9 → Cut-Extrude6 (cut)
    with BuildSketch(Plane.XY.offset(32.35)):
        with Locations((-26.07, -43.142135624)):
            Circle(SKETCH9_R)
    cut_extrude6 = extrude(amount=-CUT_EXTRUDE6_DEPTH, mode=Mode.SUBTRACT)

    # Mirror1: Loft1, Cut-Extrude6 across plane
    add(loft1.mirror(Plane(origin=(-42.5, 0, 0), x_dir=(0, 0, 1), z_dir=(1, 0, 0))))
    add(cut_extrude6.mirror(Plane(origin=(-42.5, 0, 0), x_dir=(0, 0, 1), z_dir=(1, 0, 0))), mode=Mode.SUBTRACT)


solid = part.part
